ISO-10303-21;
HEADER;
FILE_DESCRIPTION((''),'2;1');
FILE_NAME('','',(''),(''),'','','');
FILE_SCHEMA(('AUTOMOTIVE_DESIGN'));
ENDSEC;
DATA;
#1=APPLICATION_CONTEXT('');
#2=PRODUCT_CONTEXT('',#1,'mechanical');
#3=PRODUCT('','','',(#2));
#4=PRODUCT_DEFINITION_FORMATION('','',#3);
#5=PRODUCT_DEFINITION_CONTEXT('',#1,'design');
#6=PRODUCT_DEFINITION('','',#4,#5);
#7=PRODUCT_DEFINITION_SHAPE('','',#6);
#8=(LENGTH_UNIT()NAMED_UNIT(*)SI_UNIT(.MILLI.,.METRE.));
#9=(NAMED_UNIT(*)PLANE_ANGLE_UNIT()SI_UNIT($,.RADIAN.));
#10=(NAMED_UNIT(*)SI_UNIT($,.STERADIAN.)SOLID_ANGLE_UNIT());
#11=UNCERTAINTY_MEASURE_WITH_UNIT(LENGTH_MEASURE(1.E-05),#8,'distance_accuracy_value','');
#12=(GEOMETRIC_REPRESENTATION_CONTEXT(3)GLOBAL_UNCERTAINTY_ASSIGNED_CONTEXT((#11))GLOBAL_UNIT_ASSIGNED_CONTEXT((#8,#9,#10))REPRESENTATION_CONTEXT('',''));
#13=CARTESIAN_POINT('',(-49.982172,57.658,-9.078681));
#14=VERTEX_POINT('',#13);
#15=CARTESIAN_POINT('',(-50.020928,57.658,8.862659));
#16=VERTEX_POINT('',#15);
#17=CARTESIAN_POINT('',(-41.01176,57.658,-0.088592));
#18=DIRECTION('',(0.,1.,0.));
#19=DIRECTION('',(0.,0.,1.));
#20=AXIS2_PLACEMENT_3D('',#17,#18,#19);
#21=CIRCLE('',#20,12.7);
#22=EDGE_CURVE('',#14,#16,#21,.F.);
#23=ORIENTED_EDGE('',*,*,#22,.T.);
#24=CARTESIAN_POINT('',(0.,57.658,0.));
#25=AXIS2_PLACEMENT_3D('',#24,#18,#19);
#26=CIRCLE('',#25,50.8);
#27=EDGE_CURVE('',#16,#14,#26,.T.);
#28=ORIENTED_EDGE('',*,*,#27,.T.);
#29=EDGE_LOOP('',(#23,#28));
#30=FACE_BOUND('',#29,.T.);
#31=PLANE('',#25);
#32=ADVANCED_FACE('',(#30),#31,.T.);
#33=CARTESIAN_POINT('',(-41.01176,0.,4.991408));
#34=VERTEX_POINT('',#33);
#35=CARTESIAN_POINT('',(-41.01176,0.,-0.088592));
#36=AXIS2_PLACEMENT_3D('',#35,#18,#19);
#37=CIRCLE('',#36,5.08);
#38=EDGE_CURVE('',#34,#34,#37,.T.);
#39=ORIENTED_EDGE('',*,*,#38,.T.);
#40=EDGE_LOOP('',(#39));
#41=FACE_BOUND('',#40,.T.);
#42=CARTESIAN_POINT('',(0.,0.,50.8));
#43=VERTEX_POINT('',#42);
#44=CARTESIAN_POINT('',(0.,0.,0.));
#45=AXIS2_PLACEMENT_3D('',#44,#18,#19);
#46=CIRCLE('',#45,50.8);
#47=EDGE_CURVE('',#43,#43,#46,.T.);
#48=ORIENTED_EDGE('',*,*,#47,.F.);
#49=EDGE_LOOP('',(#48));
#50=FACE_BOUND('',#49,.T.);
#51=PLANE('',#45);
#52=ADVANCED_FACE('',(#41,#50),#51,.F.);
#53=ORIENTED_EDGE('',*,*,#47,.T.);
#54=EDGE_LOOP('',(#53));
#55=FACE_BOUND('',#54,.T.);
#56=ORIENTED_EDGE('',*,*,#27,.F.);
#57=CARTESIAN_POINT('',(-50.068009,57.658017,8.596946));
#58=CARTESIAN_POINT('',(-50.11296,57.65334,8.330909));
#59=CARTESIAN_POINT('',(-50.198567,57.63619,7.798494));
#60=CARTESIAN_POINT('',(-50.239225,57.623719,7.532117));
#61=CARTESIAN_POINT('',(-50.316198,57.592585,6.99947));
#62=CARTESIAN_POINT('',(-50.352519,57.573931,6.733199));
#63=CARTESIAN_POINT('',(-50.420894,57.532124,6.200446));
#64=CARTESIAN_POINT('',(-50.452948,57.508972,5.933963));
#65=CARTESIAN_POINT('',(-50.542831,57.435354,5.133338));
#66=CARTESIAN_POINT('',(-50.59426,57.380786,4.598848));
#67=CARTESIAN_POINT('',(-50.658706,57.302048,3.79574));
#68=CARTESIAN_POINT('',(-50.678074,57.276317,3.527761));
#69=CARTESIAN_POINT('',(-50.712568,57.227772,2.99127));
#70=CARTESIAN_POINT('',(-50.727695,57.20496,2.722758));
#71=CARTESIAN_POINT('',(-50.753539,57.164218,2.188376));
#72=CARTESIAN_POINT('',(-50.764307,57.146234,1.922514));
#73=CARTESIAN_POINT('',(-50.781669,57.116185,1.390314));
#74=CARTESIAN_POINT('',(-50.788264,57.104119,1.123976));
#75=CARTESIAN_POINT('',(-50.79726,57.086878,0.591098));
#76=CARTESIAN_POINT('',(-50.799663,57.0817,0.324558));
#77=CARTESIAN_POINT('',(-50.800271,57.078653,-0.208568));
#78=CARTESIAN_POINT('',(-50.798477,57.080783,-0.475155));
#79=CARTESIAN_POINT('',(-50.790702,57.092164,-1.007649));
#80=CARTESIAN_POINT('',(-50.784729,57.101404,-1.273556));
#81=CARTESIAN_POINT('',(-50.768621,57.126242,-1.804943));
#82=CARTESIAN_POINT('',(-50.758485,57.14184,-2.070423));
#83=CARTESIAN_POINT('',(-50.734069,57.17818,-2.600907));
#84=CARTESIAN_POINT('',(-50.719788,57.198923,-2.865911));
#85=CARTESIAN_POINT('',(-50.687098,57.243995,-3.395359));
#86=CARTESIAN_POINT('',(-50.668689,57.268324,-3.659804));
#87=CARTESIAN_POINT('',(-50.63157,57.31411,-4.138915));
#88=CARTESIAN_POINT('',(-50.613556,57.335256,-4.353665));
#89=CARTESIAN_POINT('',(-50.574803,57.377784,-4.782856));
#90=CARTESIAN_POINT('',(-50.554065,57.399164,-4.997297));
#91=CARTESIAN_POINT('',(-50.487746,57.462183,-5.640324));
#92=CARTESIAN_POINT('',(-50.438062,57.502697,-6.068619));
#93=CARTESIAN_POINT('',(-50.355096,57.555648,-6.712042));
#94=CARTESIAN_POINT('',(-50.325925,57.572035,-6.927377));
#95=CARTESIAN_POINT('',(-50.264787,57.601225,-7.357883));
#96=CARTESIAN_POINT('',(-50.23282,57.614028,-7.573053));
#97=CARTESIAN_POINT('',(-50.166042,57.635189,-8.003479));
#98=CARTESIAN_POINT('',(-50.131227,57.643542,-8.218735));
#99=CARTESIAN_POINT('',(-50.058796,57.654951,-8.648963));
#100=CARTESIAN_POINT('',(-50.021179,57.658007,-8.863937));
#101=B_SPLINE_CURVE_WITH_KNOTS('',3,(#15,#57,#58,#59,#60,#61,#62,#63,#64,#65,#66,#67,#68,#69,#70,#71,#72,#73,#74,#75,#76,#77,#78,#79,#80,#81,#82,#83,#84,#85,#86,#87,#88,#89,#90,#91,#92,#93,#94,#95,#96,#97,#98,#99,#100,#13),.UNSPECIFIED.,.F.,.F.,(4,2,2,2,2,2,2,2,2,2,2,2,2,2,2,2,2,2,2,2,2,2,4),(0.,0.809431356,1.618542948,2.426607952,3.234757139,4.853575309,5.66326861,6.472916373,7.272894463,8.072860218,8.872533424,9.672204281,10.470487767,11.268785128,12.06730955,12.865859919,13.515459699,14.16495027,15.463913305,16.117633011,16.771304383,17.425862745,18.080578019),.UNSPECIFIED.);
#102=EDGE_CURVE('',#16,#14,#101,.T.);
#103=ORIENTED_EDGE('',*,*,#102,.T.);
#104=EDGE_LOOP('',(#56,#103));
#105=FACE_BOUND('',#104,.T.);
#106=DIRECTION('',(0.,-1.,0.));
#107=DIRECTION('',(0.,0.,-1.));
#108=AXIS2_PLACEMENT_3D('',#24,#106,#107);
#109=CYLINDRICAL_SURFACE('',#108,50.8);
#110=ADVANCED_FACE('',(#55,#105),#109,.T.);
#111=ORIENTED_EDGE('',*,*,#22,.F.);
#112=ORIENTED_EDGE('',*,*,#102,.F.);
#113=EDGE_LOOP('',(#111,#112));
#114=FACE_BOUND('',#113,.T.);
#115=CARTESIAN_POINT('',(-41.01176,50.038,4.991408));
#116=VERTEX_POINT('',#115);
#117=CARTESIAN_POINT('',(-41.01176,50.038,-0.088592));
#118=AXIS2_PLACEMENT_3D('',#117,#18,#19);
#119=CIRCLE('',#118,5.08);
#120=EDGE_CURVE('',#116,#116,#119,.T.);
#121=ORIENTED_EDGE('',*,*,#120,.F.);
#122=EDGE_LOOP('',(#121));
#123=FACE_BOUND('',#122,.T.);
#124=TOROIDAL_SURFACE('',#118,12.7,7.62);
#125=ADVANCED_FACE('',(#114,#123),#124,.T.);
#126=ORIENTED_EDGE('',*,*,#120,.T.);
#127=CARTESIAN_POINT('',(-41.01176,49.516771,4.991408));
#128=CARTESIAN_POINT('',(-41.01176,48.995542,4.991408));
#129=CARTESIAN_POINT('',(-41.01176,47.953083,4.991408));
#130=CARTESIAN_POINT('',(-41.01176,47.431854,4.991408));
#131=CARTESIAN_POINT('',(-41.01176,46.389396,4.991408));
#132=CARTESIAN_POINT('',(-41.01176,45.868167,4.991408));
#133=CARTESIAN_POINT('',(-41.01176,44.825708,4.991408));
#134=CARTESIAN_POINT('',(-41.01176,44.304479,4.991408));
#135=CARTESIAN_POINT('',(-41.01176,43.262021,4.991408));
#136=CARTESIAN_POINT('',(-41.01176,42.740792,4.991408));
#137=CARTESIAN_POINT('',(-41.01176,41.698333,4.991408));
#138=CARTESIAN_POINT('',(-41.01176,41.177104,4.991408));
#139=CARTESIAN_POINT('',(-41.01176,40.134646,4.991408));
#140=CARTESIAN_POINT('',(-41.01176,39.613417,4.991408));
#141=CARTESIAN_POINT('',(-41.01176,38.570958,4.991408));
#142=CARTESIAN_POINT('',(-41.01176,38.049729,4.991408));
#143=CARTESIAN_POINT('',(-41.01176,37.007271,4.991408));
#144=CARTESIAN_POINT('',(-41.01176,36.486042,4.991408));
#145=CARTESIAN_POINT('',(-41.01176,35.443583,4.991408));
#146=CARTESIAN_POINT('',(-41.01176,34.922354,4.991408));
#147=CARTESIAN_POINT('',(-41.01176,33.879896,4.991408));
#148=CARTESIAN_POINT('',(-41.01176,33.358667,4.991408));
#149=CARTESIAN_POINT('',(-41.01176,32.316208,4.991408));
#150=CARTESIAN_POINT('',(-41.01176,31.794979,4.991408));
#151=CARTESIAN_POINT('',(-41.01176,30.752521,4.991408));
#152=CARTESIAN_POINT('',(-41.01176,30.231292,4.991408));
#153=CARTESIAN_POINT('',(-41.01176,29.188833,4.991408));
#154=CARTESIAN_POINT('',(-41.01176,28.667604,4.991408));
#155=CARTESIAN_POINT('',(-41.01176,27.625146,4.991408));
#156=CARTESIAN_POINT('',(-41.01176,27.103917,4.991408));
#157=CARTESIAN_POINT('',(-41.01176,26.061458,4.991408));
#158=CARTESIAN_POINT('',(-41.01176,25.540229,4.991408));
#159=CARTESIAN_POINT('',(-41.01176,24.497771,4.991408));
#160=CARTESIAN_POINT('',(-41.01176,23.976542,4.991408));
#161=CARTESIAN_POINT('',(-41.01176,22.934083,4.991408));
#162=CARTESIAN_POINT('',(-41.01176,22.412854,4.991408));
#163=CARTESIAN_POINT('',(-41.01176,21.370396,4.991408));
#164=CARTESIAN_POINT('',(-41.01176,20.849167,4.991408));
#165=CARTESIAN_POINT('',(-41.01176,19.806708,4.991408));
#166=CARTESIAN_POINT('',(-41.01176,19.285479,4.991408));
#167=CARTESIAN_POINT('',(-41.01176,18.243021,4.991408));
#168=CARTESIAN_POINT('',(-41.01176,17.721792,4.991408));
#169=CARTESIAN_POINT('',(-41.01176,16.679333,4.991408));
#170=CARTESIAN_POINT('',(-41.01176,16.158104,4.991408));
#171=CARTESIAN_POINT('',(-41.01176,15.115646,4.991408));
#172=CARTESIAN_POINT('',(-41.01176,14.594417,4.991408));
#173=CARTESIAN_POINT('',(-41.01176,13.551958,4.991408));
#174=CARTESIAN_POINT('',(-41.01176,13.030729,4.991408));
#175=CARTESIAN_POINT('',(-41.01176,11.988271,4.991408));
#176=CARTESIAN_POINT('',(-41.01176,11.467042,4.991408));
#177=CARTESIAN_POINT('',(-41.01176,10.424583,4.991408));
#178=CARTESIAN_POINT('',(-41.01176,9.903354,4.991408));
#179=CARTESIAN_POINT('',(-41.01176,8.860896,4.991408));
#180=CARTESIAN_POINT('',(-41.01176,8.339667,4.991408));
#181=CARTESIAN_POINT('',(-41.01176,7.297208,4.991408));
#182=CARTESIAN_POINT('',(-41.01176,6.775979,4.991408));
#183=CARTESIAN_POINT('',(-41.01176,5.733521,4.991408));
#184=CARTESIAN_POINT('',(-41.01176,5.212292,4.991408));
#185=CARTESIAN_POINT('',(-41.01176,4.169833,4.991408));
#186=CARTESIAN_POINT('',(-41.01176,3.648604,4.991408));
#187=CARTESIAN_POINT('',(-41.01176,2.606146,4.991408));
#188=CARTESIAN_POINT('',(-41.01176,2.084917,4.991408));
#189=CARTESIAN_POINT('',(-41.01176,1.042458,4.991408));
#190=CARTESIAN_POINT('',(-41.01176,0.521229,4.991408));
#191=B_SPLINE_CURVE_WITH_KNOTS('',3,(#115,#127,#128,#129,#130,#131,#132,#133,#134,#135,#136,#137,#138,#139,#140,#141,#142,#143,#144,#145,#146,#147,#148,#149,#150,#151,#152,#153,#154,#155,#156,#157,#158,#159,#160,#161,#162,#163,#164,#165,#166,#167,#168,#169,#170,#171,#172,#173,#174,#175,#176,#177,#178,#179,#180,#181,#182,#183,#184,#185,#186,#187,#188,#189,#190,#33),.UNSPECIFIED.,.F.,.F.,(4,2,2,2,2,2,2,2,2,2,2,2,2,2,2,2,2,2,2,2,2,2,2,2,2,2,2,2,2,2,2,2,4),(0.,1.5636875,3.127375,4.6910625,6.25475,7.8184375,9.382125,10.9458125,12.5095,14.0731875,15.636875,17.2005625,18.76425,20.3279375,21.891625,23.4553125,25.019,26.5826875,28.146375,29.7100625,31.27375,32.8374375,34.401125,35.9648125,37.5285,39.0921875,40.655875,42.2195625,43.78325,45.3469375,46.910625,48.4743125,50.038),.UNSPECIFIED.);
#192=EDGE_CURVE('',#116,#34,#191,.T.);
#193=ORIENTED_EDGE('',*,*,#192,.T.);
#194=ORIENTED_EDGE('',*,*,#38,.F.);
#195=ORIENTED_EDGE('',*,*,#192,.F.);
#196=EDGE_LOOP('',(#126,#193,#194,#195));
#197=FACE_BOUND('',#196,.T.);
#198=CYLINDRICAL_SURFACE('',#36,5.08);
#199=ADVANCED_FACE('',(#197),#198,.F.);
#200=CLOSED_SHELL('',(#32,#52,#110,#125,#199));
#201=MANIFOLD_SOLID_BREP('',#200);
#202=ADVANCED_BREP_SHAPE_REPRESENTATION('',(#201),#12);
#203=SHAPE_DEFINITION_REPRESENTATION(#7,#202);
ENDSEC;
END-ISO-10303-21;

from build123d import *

# Parameters (mm, degrees)
SKETCH2_R           = 50.8
BOSS_EXTRUDE1_DEPTH = 57.658
SKETCH3_R           = 5.08
CUT_EXTRUDE1_DEPTH  = 57.658
FILLET1_R           = 7.62


with BuildPart() as part:
    # Sketch2 → Boss-Extrude1 (new body)
    with BuildSketch(Plane(origin=(0, 0, 0), x_dir=(1, 0, 0), z_dir=(0, 1, 0))):
        with Locations(Location((0, 0, 0), (0, 0, 90))):
            Circle(SKETCH2_R)
    extrude(amount=BOSS_EXTRUDE1_DEPTH)

    # Sketch3 → Cut-Extrude1 (cut)
    with BuildSketch(Plane(origin=(0, 57.658, 0), x_dir=(1, 0, 0), z_dir=(0, 1, 0))):
        with Locations(Location((-41.011760438, 0.088591559, 0), (0, 0, 270))):
            Circle(SKETCH3_R)
    extrude(amount=-CUT_EXTRUDE1_DEPTH, mode=Mode.SUBTRACT)

    # Fillet1
    # the kernel refuses this fillet: 7.62 mm, written as the material it takes off along each edge
    with BuildSketch(Plane(origin=(-41.011760438, 57.658, -0.088591559), x_dir=(0, 0, 1), z_dir=(-1, 0, 0))) as fillet1_piece_1:
        with BuildLine():
            CenterArc((5.08 + FILLET1_R, -FILLET1_R), FILLET1_R, 90, 90)
            Line((5.08, -FILLET1_R), (5.08, 0))
            Line((5.08, 0), (5.08 + FILLET1_R, 0))
        make_face()
    revolve(axis=Axis((-41.011760438, 57.658, -0.088591559), (0, 1, 0)), mode=Mode.SUBTRACT)


solid = part.part
